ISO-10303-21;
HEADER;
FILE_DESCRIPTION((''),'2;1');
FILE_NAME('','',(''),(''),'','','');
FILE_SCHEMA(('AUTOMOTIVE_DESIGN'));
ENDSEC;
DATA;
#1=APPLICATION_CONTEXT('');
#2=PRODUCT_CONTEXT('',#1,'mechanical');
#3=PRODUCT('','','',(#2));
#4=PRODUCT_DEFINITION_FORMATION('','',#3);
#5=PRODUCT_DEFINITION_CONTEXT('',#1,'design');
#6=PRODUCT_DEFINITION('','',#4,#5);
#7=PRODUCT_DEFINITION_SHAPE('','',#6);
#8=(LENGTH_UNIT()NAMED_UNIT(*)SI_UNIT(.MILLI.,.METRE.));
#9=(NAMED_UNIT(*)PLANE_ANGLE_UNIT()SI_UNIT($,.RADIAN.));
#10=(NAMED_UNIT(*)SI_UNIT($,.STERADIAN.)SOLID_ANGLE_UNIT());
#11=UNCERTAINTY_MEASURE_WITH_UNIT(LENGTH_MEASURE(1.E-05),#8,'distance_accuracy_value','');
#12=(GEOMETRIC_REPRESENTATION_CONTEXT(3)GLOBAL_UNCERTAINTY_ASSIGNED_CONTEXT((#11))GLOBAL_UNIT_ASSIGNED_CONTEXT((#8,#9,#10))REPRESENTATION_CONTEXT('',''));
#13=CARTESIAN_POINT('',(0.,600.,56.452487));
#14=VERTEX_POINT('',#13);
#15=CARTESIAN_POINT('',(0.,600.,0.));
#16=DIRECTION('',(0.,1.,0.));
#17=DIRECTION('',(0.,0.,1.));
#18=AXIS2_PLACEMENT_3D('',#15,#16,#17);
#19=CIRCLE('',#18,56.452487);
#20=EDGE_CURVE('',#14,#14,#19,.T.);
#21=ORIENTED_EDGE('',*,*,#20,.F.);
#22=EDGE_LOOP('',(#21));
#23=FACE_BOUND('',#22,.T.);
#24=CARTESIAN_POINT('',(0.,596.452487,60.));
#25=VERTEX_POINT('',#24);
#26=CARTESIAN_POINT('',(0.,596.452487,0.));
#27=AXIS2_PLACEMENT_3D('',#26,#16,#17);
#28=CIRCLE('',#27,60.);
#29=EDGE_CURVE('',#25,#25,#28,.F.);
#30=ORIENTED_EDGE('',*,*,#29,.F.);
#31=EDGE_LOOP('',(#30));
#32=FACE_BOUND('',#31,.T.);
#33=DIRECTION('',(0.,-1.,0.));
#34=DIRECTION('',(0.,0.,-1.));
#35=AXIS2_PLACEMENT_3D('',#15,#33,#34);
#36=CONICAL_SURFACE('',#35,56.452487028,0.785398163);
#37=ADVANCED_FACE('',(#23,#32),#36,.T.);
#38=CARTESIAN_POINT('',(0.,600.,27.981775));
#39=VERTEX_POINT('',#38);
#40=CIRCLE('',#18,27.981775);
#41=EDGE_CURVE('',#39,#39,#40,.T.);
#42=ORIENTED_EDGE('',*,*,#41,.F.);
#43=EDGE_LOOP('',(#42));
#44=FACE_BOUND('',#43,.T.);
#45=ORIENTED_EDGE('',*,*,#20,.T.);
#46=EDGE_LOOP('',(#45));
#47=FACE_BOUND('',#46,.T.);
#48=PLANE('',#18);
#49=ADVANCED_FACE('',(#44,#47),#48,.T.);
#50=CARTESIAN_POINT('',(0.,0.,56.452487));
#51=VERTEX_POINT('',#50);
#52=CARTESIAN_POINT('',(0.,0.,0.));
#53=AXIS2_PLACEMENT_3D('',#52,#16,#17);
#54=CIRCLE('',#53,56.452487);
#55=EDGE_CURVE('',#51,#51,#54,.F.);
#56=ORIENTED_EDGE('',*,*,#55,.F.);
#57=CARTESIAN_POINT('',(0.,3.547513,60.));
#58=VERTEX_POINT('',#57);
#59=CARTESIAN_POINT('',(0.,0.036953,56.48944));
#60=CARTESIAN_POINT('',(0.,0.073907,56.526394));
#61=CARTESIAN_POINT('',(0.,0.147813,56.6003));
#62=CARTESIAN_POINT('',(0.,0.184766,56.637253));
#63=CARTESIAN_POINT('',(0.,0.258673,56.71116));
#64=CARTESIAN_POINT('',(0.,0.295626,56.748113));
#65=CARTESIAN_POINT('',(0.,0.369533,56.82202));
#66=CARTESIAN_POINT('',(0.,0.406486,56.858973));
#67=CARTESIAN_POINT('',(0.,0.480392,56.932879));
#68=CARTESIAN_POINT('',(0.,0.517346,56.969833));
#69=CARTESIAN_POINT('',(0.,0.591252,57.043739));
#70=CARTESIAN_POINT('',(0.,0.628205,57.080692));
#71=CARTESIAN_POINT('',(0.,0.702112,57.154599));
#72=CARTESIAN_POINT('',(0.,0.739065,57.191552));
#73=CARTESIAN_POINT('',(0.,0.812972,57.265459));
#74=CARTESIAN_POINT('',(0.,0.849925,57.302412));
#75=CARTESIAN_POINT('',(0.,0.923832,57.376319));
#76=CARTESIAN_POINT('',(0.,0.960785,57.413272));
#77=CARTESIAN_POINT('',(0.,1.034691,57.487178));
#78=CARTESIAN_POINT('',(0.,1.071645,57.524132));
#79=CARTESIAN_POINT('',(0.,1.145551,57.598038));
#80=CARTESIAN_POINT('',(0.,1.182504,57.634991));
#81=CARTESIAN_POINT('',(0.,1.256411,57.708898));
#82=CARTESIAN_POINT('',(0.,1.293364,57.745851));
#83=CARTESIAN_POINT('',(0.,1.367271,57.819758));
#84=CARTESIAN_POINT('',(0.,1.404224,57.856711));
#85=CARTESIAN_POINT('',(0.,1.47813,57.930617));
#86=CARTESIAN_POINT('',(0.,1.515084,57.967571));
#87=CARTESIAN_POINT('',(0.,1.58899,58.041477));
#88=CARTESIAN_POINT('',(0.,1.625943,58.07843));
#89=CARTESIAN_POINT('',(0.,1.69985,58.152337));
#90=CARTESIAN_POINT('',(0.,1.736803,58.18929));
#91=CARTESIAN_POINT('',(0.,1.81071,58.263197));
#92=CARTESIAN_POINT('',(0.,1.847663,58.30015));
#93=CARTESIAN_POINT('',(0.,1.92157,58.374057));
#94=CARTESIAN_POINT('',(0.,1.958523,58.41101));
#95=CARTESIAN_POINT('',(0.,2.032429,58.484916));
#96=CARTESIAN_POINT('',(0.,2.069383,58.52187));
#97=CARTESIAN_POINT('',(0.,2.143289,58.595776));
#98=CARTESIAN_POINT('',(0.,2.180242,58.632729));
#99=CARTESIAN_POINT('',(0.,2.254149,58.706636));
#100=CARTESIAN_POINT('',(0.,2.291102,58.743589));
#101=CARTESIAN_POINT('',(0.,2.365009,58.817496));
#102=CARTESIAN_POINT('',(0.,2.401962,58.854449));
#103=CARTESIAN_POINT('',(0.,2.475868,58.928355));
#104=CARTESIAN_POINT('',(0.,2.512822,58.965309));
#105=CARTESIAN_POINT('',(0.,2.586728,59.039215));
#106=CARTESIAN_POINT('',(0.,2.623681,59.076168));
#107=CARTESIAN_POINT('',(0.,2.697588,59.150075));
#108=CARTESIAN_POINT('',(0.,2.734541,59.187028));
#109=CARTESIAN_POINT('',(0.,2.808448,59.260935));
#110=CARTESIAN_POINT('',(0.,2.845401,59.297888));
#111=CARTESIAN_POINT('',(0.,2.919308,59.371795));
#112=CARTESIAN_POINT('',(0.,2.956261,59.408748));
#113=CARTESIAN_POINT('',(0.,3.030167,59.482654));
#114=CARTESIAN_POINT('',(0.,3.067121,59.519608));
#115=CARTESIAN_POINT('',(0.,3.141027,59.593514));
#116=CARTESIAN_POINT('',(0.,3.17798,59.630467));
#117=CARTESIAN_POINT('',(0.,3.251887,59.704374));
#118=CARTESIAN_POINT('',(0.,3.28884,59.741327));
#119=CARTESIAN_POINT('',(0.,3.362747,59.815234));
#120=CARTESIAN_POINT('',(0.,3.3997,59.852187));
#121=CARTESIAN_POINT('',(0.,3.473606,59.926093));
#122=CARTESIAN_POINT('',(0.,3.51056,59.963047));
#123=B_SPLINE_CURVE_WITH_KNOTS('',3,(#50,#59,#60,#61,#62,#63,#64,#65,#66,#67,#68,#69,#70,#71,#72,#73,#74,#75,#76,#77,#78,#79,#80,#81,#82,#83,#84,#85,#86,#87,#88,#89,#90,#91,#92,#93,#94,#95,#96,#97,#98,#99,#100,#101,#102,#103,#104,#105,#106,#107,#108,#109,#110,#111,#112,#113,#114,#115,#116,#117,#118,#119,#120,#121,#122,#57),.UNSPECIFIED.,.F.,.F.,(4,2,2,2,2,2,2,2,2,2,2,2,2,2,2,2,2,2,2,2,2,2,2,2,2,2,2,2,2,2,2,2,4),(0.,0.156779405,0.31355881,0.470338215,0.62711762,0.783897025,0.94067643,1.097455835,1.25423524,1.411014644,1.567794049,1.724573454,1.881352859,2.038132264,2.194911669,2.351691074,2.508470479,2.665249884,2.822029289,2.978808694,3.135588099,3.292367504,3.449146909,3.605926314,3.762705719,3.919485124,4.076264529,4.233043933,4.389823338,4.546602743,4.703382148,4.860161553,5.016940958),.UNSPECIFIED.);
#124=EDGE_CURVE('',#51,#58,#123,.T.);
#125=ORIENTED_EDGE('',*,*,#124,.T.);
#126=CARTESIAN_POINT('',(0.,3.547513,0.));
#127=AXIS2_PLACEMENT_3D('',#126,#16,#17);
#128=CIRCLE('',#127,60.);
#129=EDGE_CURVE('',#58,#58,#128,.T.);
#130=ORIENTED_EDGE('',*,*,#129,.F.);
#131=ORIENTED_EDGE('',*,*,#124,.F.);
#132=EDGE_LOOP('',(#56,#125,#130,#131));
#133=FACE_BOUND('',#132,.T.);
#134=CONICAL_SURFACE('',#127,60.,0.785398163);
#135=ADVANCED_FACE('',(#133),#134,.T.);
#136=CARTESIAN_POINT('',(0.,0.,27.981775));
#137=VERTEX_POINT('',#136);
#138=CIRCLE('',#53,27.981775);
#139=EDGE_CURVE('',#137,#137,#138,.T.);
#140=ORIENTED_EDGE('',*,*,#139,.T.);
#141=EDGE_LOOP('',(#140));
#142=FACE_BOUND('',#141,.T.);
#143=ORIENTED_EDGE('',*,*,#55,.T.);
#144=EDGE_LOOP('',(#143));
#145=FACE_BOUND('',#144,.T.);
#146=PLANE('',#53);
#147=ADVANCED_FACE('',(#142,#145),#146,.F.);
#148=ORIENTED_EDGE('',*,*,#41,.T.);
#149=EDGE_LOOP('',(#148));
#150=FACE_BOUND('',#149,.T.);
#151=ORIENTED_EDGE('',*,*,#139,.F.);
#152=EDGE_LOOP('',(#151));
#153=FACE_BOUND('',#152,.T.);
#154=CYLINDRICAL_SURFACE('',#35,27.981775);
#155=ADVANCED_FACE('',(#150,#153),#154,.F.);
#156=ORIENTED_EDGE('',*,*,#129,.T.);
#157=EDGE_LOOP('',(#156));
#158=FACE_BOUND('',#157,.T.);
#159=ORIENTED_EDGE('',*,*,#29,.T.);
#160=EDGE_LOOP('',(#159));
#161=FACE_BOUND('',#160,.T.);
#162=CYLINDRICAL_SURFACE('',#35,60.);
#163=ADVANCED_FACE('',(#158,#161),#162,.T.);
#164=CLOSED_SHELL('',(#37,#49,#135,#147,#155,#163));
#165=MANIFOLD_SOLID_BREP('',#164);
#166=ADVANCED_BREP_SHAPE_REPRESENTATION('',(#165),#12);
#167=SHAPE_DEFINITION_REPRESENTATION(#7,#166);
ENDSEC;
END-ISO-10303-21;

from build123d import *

# Parameters (mm, degrees)
SKETCH1_R           = 60
BOSS_EXTRUDE1_DEPTH = 600
SKETCH2_R           = 27.981775468
CUT_EXTRUDE1_DEPTH  = 606.970296302
CHAMFER1_SIZE       = 3.547512972


with BuildPart() as part:
    # Sketch1 → Boss-Extrude1 (new body)
    with BuildSketch(Plane(origin=(0, 0, 0), x_dir=(1, 0, 0), z_dir=(0, 1, 0))):
        Circle(SKETCH1_R)
    extrude(amount=BOSS_EXTRUDE1_DEPTH)

    # Sketch2 → Cut-Extrude1 (cut, through all)
    with BuildSketch(Plane(origin=(0, 0, 0), x_dir=(1, 0, 0), z_dir=(0, 1, 0))):
        Circle(SKETCH2_R)
    extrude(amount=CUT_EXTRUDE1_DEPTH, mode=Mode.SUBTRACT)

    # Chamfer1
    chamfer1_edges = [part.edges().sort_by_distance(p)[0] for p in [
        (-60, 600, 0),
        (-60, 0, 0),
    ]]
    chamfer(chamfer1_edges, length=CHAMFER1_SIZE)


solid = part.part
